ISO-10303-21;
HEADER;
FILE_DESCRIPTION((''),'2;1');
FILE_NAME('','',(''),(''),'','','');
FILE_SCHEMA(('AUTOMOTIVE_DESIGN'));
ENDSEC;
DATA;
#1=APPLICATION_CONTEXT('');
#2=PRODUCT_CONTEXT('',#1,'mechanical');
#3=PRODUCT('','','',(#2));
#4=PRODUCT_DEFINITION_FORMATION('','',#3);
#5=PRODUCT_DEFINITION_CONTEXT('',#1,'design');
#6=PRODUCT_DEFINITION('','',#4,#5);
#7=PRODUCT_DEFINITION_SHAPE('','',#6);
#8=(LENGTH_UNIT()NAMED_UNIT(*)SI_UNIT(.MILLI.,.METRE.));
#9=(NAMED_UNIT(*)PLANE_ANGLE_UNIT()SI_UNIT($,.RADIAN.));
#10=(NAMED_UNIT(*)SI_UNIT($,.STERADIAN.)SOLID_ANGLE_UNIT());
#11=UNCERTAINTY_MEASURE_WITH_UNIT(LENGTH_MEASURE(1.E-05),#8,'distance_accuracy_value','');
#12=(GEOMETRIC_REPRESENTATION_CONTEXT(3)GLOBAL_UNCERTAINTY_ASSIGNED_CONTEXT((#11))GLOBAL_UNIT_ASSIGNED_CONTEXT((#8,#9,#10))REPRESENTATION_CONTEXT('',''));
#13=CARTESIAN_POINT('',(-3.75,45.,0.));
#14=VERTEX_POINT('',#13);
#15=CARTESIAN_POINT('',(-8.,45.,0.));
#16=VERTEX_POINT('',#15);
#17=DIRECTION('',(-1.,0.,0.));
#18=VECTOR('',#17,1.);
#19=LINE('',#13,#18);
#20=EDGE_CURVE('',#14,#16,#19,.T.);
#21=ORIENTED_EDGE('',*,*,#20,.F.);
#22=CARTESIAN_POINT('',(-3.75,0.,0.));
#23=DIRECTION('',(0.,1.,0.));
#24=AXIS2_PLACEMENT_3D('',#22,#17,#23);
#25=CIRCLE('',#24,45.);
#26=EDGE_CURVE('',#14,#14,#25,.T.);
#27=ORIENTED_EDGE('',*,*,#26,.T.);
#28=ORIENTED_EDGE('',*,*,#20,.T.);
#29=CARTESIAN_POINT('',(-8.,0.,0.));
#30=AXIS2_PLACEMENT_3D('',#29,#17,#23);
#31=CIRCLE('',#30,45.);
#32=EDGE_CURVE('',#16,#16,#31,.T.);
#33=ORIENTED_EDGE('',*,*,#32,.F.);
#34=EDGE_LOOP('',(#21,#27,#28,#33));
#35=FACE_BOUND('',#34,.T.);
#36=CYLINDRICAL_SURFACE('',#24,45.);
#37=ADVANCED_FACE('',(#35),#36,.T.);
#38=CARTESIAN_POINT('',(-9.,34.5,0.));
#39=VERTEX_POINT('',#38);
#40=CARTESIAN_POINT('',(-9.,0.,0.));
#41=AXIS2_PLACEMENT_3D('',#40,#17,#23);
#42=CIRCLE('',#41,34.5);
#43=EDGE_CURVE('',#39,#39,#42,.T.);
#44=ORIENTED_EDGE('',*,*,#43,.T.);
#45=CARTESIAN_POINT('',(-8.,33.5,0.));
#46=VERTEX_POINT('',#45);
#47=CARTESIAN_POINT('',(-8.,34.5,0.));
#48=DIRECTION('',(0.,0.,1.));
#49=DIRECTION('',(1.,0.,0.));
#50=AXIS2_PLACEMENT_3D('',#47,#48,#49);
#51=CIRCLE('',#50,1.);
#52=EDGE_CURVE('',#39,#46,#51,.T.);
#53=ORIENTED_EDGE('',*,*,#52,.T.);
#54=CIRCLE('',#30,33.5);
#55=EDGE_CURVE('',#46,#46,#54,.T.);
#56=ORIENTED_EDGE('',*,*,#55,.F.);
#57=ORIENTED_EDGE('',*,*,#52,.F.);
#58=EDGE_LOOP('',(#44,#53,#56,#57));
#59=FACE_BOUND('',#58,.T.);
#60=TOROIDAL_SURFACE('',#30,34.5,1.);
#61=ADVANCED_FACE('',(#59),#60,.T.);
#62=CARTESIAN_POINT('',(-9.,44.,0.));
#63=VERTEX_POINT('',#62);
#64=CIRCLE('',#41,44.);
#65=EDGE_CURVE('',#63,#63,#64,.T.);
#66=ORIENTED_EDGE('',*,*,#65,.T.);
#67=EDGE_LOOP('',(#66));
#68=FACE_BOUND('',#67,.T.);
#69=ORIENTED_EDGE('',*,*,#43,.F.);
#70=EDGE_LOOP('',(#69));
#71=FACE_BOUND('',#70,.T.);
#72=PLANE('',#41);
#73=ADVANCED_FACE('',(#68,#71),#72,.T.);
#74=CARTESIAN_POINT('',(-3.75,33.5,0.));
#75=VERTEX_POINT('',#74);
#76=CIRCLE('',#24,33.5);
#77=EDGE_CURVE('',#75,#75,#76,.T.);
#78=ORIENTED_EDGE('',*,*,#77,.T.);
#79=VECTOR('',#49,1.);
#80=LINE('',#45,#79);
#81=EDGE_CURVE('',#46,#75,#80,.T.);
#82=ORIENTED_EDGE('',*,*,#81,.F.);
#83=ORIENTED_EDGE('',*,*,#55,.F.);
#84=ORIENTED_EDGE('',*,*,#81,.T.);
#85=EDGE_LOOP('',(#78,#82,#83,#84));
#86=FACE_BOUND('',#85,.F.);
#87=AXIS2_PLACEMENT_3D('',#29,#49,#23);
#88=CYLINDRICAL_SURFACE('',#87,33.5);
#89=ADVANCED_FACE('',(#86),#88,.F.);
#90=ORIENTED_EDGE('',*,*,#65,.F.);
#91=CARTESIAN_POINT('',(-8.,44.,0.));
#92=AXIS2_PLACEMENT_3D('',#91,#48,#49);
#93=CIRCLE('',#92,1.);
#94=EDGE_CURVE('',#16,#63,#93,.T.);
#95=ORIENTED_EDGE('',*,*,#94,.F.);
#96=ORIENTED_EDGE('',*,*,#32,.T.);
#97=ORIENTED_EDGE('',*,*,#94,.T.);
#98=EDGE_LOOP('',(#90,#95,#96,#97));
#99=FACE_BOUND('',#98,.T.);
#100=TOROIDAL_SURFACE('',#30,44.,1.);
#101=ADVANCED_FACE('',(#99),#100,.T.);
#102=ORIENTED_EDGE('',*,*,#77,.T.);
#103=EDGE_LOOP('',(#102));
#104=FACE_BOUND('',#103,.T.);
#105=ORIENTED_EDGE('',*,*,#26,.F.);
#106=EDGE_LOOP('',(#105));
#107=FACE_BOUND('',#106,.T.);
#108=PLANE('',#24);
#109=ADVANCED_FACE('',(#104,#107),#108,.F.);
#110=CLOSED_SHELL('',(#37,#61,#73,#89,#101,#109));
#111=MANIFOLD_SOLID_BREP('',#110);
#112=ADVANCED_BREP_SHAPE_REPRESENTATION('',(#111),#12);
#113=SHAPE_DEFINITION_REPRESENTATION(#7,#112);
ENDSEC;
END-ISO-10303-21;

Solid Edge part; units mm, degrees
sketch "Sketch1" plane through (0, 0, 0) normal (0, 0, 1) x (1, 0, 0)
  arc A0 (-9, 34.5) -> (-8, 33.5) centre (-8, 34.5) ccw
  line L0 (-8, 33.5) -> (-3.75, 33.5)
  line L1 (-3.75, 33.5) -> (-3.75, 45)
  line L2 (-3.75, 45) -> (-8, 45)
  arc A1 (-8, 45) -> (-9, 44) centre (-8, 44) ccw
  line L3 (-9, 44) -> (-9, 34.5)
revolve "RevolvedProtrusion1" add sketch "Sketch1" angle 360 about axis through (-3.75, 0, 0) along (-1, 0, 0)
properties part number "SKF_81113 TN_PART2"
